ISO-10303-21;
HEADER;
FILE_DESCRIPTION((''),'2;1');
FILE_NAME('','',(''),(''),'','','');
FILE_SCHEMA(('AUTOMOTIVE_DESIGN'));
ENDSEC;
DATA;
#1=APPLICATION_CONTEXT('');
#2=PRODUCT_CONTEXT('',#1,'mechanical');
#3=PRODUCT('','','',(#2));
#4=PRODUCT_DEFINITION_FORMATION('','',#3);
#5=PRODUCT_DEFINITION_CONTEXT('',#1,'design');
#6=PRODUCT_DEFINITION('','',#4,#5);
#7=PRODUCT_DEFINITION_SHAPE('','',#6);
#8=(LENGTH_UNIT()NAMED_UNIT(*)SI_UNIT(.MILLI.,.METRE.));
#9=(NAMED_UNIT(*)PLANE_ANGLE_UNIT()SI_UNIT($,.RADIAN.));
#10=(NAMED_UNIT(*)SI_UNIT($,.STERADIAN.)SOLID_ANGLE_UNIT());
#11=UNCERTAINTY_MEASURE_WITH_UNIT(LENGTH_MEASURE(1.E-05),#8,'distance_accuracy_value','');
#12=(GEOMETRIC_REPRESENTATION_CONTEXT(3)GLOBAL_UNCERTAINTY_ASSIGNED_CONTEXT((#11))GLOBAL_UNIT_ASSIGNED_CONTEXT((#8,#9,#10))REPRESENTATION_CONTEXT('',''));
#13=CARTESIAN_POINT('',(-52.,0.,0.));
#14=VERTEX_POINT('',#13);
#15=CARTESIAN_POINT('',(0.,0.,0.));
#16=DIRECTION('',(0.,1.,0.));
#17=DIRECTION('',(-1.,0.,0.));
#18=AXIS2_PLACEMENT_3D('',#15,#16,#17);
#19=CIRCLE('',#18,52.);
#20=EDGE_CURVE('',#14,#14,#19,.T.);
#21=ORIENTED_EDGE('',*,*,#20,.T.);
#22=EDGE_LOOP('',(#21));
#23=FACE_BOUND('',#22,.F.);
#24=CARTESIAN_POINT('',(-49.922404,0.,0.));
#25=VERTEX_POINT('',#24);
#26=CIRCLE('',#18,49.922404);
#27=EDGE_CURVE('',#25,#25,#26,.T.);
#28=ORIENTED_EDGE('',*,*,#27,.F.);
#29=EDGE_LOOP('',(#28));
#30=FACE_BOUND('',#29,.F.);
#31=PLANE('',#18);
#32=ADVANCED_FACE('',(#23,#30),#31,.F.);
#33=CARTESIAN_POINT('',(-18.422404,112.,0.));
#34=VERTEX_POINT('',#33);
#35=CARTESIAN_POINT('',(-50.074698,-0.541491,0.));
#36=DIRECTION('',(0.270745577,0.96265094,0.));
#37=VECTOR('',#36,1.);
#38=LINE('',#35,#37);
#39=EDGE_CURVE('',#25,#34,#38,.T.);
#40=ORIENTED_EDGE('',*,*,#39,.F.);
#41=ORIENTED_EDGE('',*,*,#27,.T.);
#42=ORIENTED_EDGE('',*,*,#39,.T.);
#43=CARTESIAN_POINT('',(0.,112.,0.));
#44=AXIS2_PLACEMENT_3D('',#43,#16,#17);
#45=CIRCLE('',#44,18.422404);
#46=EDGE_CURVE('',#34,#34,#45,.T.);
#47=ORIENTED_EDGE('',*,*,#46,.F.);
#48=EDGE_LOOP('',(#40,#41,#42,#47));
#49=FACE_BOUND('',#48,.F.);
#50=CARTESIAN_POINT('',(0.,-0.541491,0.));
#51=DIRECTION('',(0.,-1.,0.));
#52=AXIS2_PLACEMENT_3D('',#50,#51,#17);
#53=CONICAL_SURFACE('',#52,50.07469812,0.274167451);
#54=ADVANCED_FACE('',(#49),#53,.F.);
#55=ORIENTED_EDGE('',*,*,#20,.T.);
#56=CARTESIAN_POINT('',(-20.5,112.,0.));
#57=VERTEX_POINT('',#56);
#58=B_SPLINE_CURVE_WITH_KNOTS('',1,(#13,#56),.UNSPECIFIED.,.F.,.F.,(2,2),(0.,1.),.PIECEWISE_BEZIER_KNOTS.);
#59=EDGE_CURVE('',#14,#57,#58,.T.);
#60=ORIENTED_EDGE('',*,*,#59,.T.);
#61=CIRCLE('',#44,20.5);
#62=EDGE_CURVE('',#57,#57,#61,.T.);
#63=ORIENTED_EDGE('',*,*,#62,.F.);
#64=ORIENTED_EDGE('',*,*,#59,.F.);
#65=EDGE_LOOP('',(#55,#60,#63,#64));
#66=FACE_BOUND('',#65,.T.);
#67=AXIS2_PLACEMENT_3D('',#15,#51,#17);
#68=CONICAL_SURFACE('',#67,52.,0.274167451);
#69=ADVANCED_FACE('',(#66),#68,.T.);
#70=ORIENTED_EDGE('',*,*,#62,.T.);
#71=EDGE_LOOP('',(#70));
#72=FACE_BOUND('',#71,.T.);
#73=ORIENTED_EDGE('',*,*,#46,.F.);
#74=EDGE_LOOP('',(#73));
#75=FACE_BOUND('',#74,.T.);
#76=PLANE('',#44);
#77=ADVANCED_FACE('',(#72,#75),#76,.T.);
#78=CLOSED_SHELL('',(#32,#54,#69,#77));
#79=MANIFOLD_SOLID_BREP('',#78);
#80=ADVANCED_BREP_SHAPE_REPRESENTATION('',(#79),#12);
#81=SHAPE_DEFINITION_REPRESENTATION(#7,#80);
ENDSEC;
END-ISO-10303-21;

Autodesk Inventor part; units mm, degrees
ref_plane "YZ Plane" through (0, 0, 0) normal (1, 0, 0) x (0, 1, 0)
ref_plane "XY Plane" through (0, 0, 0) normal (0, 0, 1) x (1, 0, 0)
sketch "Szkic6" plane through (0, 0, 0) normal (0, 1, 0) x (-1, 0, 0)
  circle A0 centre (0, 0) radius 52
  dimension "d33" = 104
ref_plane "Płaszczyzna konstrukcyjna1" through (0, 112, 0) normal (0, 1, 0) x (-1, 0, 0)
sketch "Szkic7" plane through (0, 112, 0) normal (0, 1, 0) x (-1, 0, 0)
  circle A0 centre (0, 0) radius 20.5
  dimension "d35" = 41
loft "Wyciągnięcie złożone1" add profiles "Szkic6", "Szkic7"
shell "Skorupa1" thickness 2 removed faces 2 at (-3.5154, 112, 4.1371) at (-18.5271, 0, 25.061)
equation "\"d33\" = OD1"
equation "\"d35\" = OD2"
equation "\"d52\" = THK"
equation "\"SzerokośćGięciaPodcięcia\" = Grubość"
equation "\"RozmiarPodcięciaNarożnika\" = 4 * Grubość"
equation "\"PromieńPrzejścia\" = PromieńGięcia"
equation "\"Rozmiar_promienia_Jacobiego\" = PromieńGięcia"
equation "\"Wielk_odstępu\" = Grubość"
equation "\"d2\" = PromieńGięcia"
equation "\"d23\" = PromieńGięcia"
equation "\"OD1\" = 104"
equation "\"OD2\" = 41"
equation "\"L\" = 112"
equation "\"THK\" = 2"
equation "\"d34\" = L"
equation "\"Grubość\" = 1.5"
equation "\"PromieńGięcia\" = 3"
properties part number "Redukcja symetryczna Ø104x41x2 L=112" material "304"
